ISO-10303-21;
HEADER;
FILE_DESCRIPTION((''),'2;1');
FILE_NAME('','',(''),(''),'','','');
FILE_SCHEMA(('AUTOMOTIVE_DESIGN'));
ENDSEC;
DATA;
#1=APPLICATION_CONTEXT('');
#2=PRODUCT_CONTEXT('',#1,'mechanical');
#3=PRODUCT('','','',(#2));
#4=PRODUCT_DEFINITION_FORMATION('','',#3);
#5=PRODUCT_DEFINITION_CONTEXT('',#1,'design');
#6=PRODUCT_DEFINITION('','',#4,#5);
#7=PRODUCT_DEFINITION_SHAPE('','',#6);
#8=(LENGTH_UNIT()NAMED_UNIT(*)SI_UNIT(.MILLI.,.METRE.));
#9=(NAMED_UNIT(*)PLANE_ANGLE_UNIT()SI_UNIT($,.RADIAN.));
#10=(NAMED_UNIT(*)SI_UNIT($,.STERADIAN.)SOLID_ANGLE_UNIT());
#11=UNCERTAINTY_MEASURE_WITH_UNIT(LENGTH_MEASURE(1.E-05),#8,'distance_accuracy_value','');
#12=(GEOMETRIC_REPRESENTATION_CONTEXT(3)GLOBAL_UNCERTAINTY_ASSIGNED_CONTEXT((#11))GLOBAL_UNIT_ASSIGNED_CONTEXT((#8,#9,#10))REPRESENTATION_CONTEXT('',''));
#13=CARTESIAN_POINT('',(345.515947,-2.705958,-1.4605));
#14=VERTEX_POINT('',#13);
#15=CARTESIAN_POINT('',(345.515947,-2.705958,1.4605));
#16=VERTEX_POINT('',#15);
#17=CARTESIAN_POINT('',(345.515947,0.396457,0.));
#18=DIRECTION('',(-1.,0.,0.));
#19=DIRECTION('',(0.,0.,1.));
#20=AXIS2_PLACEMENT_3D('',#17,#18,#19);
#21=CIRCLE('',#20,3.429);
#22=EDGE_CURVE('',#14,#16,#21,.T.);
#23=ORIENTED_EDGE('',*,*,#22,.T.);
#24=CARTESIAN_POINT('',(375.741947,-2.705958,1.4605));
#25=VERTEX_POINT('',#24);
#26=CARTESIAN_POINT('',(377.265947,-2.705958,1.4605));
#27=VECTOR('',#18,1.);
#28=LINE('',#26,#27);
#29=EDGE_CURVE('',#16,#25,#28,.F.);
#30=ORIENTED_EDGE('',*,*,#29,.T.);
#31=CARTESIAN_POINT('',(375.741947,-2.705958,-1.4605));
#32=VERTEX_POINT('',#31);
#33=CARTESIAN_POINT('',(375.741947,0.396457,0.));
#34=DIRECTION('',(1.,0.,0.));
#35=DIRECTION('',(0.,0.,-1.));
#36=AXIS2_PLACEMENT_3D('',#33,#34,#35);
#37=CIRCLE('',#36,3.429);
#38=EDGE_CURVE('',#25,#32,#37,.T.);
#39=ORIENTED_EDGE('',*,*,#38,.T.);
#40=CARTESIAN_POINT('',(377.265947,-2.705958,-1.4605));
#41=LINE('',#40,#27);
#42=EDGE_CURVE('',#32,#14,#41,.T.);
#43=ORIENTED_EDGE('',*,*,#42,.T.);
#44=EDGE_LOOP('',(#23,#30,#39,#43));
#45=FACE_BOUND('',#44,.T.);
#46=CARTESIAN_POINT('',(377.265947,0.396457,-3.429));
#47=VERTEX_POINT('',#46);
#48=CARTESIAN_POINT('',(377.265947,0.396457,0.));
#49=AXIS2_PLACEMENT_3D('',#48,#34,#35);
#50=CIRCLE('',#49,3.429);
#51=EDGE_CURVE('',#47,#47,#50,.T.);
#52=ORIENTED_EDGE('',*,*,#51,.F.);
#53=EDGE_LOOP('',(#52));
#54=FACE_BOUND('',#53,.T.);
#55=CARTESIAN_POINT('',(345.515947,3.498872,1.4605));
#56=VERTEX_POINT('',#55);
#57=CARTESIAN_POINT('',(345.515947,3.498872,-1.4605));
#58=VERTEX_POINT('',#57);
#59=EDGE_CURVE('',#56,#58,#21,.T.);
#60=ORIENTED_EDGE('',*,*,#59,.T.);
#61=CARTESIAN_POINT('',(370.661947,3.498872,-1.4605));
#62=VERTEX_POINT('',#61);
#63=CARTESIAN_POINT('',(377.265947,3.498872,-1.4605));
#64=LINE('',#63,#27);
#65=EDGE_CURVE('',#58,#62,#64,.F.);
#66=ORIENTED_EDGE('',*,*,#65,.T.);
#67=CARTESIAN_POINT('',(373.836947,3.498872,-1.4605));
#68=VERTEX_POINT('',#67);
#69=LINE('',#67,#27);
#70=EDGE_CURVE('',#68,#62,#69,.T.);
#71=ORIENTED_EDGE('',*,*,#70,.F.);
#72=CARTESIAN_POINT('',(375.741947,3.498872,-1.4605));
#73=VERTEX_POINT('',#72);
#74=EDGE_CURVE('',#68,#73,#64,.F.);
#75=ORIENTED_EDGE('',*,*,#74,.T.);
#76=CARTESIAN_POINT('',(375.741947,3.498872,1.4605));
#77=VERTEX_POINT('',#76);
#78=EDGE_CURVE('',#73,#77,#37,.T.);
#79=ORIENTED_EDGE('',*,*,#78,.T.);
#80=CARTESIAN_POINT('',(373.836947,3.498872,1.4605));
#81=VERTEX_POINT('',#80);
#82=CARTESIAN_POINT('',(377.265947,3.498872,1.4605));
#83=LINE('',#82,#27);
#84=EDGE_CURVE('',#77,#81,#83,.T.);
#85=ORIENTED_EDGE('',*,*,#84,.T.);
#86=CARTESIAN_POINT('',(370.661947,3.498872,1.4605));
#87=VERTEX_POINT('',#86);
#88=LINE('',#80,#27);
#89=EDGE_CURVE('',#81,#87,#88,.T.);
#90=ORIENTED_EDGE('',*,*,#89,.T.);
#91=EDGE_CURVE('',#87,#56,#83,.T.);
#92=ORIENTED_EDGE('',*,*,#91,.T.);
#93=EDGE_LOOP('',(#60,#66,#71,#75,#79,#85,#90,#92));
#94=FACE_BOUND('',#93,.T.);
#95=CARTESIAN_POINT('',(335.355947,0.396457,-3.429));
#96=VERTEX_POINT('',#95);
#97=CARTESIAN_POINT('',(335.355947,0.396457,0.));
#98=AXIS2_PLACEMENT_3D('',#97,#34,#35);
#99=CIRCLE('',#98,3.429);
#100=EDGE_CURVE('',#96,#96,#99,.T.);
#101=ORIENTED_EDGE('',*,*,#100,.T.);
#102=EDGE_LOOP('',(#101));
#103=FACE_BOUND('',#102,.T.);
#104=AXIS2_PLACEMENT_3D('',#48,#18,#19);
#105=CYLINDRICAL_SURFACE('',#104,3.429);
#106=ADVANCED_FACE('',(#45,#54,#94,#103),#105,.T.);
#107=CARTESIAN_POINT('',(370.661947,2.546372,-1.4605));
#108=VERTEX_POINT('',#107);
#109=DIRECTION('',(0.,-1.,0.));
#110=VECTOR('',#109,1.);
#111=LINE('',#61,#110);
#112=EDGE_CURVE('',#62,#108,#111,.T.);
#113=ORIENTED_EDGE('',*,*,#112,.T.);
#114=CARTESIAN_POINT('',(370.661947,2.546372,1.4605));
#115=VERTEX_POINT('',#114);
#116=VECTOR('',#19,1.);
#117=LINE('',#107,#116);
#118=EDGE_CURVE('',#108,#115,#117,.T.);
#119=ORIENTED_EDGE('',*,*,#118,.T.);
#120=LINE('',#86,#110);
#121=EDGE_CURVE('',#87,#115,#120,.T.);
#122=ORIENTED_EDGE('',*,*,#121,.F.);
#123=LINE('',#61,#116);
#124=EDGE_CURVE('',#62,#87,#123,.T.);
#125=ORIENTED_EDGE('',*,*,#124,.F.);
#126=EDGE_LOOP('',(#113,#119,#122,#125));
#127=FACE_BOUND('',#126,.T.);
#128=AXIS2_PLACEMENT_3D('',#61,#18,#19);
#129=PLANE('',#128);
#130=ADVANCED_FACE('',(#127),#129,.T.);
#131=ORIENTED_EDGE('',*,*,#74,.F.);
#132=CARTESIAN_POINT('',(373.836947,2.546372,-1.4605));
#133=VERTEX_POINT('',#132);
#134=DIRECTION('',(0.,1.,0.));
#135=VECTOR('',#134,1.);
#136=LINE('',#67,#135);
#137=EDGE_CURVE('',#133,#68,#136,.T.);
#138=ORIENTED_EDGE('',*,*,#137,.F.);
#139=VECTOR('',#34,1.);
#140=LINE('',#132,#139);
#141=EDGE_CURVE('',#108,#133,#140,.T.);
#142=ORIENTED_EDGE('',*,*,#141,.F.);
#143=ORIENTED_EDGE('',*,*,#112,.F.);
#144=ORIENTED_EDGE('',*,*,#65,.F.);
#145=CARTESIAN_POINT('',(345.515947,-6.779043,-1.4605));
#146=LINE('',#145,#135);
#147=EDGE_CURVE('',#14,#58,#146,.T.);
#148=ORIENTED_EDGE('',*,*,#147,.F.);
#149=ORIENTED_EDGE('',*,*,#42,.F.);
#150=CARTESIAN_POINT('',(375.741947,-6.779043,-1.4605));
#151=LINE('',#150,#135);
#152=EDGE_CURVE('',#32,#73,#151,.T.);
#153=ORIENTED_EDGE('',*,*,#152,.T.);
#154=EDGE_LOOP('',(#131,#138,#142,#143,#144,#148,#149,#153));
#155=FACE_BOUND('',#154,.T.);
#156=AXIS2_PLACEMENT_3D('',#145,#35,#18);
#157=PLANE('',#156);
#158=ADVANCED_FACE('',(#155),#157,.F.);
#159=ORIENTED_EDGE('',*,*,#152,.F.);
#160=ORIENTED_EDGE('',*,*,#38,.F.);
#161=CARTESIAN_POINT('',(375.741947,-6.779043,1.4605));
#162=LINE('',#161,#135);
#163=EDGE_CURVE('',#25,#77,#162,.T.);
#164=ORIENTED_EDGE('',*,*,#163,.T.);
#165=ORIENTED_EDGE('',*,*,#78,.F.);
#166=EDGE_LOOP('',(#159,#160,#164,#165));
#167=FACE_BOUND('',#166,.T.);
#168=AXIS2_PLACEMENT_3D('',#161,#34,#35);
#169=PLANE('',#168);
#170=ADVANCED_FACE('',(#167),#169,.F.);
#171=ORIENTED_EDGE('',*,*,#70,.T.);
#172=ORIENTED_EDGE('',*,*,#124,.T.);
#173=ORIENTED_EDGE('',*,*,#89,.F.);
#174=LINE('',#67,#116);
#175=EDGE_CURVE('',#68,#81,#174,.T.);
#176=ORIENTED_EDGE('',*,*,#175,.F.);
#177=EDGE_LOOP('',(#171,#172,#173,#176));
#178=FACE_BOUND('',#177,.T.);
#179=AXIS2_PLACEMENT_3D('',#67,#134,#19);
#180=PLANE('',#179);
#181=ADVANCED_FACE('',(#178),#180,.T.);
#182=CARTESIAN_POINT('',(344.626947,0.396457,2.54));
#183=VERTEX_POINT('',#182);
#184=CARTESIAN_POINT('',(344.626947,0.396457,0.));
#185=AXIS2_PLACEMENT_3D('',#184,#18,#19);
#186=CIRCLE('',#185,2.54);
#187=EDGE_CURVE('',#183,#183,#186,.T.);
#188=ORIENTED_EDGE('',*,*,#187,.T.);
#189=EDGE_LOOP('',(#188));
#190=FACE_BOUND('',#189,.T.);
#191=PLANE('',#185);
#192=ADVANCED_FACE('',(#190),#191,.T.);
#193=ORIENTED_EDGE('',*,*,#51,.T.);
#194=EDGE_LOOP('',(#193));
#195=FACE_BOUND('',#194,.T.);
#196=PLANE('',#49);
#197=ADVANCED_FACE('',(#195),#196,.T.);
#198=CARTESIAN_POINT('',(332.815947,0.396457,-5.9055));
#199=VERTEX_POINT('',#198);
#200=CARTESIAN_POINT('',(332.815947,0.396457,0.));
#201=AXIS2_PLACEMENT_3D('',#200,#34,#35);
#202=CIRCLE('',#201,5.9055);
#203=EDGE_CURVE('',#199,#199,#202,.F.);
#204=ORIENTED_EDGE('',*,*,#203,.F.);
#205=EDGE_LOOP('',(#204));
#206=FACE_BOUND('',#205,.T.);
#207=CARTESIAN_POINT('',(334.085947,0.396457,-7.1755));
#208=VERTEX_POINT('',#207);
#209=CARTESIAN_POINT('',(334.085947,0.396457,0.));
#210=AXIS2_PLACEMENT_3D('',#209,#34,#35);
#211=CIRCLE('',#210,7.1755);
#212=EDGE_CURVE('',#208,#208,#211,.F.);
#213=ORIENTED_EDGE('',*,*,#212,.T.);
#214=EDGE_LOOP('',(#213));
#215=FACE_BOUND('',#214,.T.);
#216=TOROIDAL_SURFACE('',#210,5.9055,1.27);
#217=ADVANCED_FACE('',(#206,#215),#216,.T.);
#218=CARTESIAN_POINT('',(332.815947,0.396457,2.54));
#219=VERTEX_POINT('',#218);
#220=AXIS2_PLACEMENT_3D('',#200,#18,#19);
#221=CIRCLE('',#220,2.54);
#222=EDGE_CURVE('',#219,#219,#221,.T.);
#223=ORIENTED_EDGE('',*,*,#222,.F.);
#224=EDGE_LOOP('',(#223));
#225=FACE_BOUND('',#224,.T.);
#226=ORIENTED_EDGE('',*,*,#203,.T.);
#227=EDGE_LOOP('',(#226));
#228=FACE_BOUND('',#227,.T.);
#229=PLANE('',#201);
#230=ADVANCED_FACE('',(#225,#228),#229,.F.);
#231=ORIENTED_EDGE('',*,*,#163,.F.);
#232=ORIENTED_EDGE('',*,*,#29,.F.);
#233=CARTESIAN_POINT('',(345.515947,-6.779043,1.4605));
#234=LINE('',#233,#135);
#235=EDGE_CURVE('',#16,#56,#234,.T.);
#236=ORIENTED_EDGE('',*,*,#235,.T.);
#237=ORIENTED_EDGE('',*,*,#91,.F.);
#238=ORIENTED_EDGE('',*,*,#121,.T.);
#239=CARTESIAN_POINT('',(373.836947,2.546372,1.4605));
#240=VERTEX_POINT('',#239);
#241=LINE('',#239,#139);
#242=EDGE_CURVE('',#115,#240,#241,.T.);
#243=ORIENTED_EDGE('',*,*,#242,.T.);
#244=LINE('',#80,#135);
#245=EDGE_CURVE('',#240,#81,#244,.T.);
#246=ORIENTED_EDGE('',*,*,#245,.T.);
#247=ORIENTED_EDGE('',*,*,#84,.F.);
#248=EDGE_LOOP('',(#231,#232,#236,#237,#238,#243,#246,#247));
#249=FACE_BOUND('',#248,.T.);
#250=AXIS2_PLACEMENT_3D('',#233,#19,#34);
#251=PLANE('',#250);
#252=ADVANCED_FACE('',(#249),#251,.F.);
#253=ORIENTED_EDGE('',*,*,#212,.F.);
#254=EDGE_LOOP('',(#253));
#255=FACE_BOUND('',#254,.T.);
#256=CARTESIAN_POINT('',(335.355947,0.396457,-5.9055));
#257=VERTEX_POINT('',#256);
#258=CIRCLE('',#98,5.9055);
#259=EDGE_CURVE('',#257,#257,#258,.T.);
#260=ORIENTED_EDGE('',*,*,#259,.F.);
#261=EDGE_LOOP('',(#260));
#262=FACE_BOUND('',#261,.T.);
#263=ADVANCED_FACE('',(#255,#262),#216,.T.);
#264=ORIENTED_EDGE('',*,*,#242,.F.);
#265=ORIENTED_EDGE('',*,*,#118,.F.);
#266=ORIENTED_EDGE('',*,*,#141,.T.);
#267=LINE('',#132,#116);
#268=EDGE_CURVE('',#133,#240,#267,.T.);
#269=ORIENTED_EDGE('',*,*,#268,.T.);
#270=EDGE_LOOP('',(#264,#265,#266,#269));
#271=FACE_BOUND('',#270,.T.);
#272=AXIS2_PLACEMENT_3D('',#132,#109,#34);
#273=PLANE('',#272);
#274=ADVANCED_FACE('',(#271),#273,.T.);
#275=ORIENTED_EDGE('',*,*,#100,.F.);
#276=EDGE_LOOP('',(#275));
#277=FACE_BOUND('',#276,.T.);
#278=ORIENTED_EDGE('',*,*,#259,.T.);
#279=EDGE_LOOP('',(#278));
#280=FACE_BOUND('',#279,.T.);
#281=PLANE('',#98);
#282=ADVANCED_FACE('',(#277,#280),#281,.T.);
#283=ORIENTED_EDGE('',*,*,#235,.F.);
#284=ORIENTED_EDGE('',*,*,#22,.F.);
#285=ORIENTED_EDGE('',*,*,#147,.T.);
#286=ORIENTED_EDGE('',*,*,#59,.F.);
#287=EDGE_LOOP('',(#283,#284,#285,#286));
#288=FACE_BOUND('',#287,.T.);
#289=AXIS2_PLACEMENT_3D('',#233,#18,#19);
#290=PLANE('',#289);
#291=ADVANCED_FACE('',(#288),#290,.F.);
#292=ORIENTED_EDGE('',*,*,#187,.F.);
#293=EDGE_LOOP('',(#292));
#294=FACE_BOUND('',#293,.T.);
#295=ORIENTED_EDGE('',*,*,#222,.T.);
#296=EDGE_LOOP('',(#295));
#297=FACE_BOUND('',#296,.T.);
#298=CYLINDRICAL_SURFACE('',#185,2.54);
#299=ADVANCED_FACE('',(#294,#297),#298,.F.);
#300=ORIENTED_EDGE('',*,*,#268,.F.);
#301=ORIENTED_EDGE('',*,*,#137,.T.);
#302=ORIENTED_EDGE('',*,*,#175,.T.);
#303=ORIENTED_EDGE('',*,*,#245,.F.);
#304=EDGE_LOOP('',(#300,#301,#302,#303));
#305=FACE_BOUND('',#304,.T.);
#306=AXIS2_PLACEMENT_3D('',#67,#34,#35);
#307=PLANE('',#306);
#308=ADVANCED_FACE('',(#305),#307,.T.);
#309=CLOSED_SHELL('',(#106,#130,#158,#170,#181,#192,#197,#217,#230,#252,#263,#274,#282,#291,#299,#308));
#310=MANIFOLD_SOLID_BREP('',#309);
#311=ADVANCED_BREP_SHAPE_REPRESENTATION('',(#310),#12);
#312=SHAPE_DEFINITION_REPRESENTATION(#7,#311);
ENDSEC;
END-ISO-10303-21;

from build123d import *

# Parameters (mm, degrees)
SKETCH1_R               = 143.51
BOSS_EXTRUDE1_DEPTH     = 50.8
SKETCH2_R               = 68.58
BOSS_EXTRUDE2_DEPTH     = 838.2
CUT_EXTRUDE1_DEPTH      = 912.872381532
CUT_EXTRUDE1_DEPTH_BACK = 912.872381532
SKETCH3_W               = 604.52
SKETCH3_H               = 58.42
SKETCH4_R               = 50.8
CUT_EXTRUDE2_DEPTH      = 236.22
SKETCH5_W               = 63.5
SKETCH5_H               = 19.05
BOSS_EXTRUDE3_DEPTH     = 29.21
FILLET1_R               = 25.4
SCALE1_SCALE            = 0.05


with BuildPart() as part:
    # Sketch1 → Boss-Extrude1 (new body)
    with BuildSketch(Plane(origin=(0, 0, 0), x_dir=(0, 0, -1), z_dir=(1, 0, 0))):
        Circle(SKETCH1_R)
    extrude(amount=BOSS_EXTRUDE1_DEPTH)

    # Sketch2 → Boss-Extrude2 (add)
    with BuildSketch(Plane(origin=(50.8, 0, 0), x_dir=(0, 0, -1), z_dir=(1, 0, 0))):
        Circle(SKETCH2_R)
    extrude(amount=BOSS_EXTRUDE2_DEPTH)

    # Sketch3 → Cut-Extrude1 (cut, two sides: drawn at the far end of the back side and taken through both)
    with BuildSketch(Plane(origin=(0, 0, 0), x_dir=(1, 0, 0), z_dir=(0, 1, 0)).offset(-CUT_EXTRUDE1_DEPTH_BACK)):
        with Locations((556.26, 0)):
            Rectangle(SKETCH3_W, SKETCH3_H)
    extrude(amount=CUT_EXTRUDE1_DEPTH + CUT_EXTRUDE1_DEPTH_BACK, mode=Mode.SUBTRACT)

    # Sketch4 → Cut-Extrude2 (cut)
    with BuildSketch(Plane.ZY):
        Circle(SKETCH4_R)
    extrude(amount=-CUT_EXTRUDE2_DEPTH, mode=Mode.SUBTRACT)

    # Sketch5 → Boss-Extrude3 (add, symmetric)
    with BuildSketch(Plane.XY):
        with Locations((788.67, 52.523306182)):
            Rectangle(SKETCH5_W, SKETCH5_H)
    extrude(amount=BOSS_EXTRUDE3_DEPTH, both=True)

    # Fillet1
    fillet1_edges = [part.edges().sort_by_distance(p)[0] for p in [
        (0, 0, 143.51),
        (50.8, 0, 143.51),
    ]]
    fillet(fillet1_edges, radius=FILLET1_R - 0.0001)  # a hair under: the kernel refuses the full size


with BuildPart() as part_1:
    # Scale1: scaled about (350.332507714, 0.417323247, 0)
    add(part.part.scale(SCALE1_SCALE).moved(Location((332.815882328, 0.396457085, 0))))


solid = part_1.part
